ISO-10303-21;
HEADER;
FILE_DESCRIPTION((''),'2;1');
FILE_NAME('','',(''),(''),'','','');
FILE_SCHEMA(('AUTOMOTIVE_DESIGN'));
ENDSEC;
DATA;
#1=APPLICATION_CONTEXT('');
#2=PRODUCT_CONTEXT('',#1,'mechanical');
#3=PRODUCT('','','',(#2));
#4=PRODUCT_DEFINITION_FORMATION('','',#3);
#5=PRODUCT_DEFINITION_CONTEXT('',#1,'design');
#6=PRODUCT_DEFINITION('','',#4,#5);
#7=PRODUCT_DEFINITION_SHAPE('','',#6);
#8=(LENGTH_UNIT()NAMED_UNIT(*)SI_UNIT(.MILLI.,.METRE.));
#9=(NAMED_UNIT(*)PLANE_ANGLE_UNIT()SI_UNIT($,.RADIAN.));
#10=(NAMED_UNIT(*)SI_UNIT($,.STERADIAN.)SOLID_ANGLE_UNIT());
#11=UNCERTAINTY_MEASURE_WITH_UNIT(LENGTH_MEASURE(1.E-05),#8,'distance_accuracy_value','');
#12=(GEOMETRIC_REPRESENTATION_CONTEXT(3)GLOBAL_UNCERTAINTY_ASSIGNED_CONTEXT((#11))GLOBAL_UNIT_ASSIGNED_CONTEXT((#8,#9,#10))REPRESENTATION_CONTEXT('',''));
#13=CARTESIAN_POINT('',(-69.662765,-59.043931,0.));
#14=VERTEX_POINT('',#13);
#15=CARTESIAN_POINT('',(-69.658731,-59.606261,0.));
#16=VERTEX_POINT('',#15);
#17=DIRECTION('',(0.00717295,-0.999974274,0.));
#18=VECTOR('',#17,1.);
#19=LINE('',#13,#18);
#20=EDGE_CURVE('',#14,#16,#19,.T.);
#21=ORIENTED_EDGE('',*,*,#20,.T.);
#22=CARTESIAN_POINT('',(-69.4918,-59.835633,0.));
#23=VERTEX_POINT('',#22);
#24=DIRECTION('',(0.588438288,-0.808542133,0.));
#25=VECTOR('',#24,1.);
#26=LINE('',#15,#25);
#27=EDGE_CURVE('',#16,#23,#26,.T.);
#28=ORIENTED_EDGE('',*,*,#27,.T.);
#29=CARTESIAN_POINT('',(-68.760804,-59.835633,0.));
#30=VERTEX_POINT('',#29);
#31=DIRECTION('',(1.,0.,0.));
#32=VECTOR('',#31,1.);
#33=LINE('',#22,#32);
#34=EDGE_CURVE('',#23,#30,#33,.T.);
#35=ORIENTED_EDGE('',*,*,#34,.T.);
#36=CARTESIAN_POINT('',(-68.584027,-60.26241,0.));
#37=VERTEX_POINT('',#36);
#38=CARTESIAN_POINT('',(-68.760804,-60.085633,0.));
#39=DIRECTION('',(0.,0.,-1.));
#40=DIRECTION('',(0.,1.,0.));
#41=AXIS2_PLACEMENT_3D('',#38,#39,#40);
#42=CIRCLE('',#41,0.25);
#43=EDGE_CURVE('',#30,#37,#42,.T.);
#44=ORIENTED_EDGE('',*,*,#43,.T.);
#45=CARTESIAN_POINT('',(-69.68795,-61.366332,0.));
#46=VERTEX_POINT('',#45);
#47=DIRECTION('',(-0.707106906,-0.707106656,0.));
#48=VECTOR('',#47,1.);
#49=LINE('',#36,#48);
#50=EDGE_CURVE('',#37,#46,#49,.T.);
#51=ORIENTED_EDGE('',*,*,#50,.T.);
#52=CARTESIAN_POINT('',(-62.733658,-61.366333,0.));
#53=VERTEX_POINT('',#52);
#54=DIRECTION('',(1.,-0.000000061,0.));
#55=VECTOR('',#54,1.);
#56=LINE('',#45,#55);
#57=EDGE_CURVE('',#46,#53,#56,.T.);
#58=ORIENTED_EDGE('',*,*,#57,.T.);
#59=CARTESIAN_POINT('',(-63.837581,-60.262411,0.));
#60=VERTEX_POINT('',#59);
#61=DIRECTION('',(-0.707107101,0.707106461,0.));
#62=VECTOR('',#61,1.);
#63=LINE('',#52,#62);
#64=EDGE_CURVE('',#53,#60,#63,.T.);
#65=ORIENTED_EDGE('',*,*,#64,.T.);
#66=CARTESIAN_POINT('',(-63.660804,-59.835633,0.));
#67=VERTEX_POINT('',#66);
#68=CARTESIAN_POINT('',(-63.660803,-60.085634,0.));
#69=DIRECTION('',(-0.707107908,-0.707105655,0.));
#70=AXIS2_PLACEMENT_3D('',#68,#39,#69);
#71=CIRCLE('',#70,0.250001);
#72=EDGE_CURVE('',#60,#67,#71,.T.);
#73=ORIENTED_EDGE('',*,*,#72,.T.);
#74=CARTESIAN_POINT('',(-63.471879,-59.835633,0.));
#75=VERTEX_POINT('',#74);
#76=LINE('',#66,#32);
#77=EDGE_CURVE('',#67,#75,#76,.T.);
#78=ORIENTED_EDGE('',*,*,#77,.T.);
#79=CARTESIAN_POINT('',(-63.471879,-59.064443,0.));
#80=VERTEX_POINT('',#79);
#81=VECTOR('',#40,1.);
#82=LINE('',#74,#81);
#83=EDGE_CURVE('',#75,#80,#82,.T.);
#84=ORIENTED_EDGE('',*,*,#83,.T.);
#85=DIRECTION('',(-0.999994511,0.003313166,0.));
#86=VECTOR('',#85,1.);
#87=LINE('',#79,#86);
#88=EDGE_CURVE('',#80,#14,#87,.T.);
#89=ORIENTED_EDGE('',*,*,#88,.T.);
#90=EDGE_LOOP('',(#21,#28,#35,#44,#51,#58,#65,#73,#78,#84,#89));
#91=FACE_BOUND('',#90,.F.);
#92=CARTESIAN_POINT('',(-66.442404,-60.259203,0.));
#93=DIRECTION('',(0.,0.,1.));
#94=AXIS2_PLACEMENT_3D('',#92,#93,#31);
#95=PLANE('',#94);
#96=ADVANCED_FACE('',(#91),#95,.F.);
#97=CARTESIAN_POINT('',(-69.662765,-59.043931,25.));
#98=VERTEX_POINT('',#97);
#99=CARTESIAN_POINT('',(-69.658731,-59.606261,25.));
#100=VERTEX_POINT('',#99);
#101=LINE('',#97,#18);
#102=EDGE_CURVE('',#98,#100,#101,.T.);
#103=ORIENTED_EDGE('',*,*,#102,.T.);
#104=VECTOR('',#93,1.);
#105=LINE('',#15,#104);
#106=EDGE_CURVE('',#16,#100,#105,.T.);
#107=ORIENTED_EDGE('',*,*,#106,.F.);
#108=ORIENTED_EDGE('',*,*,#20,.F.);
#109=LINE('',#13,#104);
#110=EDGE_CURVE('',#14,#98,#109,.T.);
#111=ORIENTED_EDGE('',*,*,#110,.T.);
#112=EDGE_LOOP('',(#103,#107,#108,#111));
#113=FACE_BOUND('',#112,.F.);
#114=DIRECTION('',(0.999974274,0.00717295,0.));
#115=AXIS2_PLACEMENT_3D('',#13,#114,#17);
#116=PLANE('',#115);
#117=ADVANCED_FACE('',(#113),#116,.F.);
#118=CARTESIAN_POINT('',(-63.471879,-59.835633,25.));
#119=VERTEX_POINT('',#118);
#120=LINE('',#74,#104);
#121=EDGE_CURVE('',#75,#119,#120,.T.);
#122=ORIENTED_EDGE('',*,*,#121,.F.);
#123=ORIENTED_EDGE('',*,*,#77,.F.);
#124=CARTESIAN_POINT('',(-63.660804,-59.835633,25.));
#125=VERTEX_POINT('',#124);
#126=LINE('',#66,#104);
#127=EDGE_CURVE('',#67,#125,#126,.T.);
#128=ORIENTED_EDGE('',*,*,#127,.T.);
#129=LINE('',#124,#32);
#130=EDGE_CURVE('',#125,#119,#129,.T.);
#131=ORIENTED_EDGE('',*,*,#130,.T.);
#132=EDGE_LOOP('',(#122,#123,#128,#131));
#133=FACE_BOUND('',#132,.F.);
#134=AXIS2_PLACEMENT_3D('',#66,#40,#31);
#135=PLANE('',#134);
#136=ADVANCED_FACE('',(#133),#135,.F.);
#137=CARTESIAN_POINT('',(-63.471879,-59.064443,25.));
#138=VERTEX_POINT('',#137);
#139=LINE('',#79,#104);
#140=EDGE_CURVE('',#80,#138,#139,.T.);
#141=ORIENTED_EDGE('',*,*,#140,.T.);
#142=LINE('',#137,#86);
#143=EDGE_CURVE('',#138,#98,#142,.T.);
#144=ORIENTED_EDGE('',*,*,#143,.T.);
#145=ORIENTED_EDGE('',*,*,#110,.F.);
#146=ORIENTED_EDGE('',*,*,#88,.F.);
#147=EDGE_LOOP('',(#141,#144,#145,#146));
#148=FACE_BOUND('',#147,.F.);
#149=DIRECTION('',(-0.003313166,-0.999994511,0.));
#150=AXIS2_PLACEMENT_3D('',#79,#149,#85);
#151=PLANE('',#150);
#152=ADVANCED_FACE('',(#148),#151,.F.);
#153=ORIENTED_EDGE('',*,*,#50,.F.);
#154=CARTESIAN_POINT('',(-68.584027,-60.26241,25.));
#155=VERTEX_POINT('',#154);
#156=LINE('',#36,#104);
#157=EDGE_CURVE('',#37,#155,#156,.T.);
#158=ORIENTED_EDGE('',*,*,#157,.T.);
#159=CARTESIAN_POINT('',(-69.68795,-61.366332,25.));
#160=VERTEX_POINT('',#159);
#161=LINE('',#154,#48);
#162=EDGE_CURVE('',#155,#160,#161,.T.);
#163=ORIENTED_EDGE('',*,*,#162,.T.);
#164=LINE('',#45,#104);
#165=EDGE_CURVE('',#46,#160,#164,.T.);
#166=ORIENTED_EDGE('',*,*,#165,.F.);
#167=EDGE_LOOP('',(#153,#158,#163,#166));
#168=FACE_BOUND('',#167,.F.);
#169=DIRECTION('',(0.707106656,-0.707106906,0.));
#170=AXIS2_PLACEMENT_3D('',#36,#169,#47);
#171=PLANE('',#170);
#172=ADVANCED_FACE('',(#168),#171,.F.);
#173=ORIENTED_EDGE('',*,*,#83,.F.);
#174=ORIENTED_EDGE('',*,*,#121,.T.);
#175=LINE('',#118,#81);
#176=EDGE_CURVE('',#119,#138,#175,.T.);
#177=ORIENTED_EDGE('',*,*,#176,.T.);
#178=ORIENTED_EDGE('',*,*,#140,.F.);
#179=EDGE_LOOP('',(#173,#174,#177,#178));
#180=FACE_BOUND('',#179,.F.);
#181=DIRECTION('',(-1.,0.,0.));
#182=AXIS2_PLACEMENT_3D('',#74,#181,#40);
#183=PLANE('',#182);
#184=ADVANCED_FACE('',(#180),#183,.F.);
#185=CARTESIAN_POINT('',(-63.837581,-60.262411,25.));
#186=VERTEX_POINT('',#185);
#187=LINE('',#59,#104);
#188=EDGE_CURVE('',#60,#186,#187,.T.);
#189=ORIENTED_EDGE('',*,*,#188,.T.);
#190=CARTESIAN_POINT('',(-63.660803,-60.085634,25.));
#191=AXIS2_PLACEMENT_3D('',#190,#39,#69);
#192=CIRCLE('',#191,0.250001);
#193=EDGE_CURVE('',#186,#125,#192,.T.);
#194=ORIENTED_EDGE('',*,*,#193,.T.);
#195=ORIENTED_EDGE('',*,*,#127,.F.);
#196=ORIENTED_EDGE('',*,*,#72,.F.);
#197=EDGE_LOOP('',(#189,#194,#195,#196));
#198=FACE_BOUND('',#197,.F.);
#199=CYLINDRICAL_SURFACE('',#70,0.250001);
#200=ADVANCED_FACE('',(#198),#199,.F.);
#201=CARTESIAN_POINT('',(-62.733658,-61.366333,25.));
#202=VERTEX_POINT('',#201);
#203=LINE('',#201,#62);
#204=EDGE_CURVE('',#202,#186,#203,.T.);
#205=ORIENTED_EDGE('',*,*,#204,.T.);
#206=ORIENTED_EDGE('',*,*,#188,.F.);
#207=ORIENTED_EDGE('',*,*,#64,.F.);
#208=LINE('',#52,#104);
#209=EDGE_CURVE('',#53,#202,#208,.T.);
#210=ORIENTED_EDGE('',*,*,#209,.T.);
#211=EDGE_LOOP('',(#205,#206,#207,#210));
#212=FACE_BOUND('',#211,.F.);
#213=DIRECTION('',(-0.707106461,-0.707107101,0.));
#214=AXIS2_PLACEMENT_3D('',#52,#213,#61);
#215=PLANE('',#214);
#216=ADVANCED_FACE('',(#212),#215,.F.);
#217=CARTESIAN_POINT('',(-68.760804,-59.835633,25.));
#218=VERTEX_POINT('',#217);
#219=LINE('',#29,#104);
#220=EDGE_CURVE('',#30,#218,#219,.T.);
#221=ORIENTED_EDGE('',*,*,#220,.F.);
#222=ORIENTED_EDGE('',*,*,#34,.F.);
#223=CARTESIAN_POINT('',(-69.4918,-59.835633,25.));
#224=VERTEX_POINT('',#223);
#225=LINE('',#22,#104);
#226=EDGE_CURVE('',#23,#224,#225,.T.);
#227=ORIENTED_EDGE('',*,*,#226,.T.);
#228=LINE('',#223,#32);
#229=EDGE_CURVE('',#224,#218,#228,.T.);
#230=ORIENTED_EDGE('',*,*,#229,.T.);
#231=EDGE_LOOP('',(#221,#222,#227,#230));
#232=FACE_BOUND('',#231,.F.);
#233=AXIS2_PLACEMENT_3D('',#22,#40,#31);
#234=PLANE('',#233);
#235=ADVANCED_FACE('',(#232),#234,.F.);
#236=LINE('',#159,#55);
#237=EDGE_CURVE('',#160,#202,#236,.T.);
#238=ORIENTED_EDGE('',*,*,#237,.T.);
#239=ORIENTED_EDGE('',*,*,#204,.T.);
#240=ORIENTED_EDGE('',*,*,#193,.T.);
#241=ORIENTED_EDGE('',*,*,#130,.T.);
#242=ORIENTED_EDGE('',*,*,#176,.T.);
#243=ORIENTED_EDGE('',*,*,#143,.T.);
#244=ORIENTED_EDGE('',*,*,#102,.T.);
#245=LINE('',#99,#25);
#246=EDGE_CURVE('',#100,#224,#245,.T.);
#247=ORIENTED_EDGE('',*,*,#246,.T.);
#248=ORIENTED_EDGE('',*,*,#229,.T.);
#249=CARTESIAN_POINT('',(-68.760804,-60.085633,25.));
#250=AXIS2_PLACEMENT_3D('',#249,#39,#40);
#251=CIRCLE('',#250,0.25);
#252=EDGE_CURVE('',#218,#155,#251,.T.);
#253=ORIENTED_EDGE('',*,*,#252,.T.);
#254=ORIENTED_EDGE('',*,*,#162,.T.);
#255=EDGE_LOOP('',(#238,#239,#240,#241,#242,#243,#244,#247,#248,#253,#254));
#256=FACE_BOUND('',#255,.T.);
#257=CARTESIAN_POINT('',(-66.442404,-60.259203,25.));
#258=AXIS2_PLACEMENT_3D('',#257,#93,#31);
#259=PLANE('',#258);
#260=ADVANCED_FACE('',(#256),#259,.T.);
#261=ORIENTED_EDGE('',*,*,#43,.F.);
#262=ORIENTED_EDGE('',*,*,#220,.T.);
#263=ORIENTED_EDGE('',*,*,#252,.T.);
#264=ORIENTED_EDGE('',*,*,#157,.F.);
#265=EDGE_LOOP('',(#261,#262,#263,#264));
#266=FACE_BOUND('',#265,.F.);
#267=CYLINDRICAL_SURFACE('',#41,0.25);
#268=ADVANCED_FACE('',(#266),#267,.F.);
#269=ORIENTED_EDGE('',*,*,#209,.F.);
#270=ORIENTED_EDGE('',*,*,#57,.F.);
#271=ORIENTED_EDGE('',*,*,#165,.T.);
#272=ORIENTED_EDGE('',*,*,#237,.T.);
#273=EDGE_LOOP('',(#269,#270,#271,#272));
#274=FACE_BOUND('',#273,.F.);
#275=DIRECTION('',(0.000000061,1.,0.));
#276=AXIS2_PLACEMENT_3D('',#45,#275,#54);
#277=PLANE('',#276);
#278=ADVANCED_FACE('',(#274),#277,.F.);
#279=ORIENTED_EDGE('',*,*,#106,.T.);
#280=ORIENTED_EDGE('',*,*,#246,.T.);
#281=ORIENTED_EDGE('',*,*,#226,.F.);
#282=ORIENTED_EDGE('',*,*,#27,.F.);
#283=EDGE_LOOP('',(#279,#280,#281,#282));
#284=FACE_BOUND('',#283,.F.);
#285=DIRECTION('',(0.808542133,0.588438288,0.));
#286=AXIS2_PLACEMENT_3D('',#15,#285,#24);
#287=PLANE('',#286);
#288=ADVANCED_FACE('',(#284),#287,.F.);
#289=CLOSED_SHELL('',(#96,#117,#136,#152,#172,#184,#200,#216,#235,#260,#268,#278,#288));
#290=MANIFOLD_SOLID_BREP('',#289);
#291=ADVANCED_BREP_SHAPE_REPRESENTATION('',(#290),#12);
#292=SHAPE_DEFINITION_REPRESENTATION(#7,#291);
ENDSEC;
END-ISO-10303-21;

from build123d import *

# Parameters (mm, degrees)
F1_DEPTH = 25


# Not quite as in the source:
# - ends of sketch curves that miss each other by under 0.0002 mm in the source are joined


with BuildPart() as f1:
    # F0 (on Top) → F1 (new body)
    with BuildSketch(Plane.XY):
        with BuildLine():
            ThreePointArc((-68.7608035324, -59.8356334478), (-68.5298336492, -59.9899625897), (-68.5840268371, -60.2624101431))
            Line((-68.5840268371, -60.2624101431), (-69.6879495324, -61.3663324478))
            Line((-69.6879495324, -61.3663324478), (-62.7336575324, -61.3663328727))
            Line((-62.7336575324, -61.3663328727), (-63.8375805324, -60.2624108727))
            ThreePointArc((-63.8375805324, -60.2624108727), (-63.8917734155, -59.9899625897), (-63.6608035324, -59.8356334478))
            Line((-63.6608035324, -59.8356334478), (-63.4718790681, -59.8356334478))
            Line((-63.4718790681, -59.8356334478), (-63.4718790681, -59.0644426644))
            Line((-63.4718790681, -59.0644426644), (-69.6627650617, -59.0439311215))
            Line((-69.6627650617, -59.0439311215), (-69.6587313915, -59.6062613089))
            Line((-69.6587313915, -59.6062613089), (-69.491799647, -59.8356334478))
            Line((-69.491799647, -59.8356334478), (-68.7608035324, -59.8356334478))
        make_face()
    extrude(amount=F1_DEPTH)


solid = f1.part
